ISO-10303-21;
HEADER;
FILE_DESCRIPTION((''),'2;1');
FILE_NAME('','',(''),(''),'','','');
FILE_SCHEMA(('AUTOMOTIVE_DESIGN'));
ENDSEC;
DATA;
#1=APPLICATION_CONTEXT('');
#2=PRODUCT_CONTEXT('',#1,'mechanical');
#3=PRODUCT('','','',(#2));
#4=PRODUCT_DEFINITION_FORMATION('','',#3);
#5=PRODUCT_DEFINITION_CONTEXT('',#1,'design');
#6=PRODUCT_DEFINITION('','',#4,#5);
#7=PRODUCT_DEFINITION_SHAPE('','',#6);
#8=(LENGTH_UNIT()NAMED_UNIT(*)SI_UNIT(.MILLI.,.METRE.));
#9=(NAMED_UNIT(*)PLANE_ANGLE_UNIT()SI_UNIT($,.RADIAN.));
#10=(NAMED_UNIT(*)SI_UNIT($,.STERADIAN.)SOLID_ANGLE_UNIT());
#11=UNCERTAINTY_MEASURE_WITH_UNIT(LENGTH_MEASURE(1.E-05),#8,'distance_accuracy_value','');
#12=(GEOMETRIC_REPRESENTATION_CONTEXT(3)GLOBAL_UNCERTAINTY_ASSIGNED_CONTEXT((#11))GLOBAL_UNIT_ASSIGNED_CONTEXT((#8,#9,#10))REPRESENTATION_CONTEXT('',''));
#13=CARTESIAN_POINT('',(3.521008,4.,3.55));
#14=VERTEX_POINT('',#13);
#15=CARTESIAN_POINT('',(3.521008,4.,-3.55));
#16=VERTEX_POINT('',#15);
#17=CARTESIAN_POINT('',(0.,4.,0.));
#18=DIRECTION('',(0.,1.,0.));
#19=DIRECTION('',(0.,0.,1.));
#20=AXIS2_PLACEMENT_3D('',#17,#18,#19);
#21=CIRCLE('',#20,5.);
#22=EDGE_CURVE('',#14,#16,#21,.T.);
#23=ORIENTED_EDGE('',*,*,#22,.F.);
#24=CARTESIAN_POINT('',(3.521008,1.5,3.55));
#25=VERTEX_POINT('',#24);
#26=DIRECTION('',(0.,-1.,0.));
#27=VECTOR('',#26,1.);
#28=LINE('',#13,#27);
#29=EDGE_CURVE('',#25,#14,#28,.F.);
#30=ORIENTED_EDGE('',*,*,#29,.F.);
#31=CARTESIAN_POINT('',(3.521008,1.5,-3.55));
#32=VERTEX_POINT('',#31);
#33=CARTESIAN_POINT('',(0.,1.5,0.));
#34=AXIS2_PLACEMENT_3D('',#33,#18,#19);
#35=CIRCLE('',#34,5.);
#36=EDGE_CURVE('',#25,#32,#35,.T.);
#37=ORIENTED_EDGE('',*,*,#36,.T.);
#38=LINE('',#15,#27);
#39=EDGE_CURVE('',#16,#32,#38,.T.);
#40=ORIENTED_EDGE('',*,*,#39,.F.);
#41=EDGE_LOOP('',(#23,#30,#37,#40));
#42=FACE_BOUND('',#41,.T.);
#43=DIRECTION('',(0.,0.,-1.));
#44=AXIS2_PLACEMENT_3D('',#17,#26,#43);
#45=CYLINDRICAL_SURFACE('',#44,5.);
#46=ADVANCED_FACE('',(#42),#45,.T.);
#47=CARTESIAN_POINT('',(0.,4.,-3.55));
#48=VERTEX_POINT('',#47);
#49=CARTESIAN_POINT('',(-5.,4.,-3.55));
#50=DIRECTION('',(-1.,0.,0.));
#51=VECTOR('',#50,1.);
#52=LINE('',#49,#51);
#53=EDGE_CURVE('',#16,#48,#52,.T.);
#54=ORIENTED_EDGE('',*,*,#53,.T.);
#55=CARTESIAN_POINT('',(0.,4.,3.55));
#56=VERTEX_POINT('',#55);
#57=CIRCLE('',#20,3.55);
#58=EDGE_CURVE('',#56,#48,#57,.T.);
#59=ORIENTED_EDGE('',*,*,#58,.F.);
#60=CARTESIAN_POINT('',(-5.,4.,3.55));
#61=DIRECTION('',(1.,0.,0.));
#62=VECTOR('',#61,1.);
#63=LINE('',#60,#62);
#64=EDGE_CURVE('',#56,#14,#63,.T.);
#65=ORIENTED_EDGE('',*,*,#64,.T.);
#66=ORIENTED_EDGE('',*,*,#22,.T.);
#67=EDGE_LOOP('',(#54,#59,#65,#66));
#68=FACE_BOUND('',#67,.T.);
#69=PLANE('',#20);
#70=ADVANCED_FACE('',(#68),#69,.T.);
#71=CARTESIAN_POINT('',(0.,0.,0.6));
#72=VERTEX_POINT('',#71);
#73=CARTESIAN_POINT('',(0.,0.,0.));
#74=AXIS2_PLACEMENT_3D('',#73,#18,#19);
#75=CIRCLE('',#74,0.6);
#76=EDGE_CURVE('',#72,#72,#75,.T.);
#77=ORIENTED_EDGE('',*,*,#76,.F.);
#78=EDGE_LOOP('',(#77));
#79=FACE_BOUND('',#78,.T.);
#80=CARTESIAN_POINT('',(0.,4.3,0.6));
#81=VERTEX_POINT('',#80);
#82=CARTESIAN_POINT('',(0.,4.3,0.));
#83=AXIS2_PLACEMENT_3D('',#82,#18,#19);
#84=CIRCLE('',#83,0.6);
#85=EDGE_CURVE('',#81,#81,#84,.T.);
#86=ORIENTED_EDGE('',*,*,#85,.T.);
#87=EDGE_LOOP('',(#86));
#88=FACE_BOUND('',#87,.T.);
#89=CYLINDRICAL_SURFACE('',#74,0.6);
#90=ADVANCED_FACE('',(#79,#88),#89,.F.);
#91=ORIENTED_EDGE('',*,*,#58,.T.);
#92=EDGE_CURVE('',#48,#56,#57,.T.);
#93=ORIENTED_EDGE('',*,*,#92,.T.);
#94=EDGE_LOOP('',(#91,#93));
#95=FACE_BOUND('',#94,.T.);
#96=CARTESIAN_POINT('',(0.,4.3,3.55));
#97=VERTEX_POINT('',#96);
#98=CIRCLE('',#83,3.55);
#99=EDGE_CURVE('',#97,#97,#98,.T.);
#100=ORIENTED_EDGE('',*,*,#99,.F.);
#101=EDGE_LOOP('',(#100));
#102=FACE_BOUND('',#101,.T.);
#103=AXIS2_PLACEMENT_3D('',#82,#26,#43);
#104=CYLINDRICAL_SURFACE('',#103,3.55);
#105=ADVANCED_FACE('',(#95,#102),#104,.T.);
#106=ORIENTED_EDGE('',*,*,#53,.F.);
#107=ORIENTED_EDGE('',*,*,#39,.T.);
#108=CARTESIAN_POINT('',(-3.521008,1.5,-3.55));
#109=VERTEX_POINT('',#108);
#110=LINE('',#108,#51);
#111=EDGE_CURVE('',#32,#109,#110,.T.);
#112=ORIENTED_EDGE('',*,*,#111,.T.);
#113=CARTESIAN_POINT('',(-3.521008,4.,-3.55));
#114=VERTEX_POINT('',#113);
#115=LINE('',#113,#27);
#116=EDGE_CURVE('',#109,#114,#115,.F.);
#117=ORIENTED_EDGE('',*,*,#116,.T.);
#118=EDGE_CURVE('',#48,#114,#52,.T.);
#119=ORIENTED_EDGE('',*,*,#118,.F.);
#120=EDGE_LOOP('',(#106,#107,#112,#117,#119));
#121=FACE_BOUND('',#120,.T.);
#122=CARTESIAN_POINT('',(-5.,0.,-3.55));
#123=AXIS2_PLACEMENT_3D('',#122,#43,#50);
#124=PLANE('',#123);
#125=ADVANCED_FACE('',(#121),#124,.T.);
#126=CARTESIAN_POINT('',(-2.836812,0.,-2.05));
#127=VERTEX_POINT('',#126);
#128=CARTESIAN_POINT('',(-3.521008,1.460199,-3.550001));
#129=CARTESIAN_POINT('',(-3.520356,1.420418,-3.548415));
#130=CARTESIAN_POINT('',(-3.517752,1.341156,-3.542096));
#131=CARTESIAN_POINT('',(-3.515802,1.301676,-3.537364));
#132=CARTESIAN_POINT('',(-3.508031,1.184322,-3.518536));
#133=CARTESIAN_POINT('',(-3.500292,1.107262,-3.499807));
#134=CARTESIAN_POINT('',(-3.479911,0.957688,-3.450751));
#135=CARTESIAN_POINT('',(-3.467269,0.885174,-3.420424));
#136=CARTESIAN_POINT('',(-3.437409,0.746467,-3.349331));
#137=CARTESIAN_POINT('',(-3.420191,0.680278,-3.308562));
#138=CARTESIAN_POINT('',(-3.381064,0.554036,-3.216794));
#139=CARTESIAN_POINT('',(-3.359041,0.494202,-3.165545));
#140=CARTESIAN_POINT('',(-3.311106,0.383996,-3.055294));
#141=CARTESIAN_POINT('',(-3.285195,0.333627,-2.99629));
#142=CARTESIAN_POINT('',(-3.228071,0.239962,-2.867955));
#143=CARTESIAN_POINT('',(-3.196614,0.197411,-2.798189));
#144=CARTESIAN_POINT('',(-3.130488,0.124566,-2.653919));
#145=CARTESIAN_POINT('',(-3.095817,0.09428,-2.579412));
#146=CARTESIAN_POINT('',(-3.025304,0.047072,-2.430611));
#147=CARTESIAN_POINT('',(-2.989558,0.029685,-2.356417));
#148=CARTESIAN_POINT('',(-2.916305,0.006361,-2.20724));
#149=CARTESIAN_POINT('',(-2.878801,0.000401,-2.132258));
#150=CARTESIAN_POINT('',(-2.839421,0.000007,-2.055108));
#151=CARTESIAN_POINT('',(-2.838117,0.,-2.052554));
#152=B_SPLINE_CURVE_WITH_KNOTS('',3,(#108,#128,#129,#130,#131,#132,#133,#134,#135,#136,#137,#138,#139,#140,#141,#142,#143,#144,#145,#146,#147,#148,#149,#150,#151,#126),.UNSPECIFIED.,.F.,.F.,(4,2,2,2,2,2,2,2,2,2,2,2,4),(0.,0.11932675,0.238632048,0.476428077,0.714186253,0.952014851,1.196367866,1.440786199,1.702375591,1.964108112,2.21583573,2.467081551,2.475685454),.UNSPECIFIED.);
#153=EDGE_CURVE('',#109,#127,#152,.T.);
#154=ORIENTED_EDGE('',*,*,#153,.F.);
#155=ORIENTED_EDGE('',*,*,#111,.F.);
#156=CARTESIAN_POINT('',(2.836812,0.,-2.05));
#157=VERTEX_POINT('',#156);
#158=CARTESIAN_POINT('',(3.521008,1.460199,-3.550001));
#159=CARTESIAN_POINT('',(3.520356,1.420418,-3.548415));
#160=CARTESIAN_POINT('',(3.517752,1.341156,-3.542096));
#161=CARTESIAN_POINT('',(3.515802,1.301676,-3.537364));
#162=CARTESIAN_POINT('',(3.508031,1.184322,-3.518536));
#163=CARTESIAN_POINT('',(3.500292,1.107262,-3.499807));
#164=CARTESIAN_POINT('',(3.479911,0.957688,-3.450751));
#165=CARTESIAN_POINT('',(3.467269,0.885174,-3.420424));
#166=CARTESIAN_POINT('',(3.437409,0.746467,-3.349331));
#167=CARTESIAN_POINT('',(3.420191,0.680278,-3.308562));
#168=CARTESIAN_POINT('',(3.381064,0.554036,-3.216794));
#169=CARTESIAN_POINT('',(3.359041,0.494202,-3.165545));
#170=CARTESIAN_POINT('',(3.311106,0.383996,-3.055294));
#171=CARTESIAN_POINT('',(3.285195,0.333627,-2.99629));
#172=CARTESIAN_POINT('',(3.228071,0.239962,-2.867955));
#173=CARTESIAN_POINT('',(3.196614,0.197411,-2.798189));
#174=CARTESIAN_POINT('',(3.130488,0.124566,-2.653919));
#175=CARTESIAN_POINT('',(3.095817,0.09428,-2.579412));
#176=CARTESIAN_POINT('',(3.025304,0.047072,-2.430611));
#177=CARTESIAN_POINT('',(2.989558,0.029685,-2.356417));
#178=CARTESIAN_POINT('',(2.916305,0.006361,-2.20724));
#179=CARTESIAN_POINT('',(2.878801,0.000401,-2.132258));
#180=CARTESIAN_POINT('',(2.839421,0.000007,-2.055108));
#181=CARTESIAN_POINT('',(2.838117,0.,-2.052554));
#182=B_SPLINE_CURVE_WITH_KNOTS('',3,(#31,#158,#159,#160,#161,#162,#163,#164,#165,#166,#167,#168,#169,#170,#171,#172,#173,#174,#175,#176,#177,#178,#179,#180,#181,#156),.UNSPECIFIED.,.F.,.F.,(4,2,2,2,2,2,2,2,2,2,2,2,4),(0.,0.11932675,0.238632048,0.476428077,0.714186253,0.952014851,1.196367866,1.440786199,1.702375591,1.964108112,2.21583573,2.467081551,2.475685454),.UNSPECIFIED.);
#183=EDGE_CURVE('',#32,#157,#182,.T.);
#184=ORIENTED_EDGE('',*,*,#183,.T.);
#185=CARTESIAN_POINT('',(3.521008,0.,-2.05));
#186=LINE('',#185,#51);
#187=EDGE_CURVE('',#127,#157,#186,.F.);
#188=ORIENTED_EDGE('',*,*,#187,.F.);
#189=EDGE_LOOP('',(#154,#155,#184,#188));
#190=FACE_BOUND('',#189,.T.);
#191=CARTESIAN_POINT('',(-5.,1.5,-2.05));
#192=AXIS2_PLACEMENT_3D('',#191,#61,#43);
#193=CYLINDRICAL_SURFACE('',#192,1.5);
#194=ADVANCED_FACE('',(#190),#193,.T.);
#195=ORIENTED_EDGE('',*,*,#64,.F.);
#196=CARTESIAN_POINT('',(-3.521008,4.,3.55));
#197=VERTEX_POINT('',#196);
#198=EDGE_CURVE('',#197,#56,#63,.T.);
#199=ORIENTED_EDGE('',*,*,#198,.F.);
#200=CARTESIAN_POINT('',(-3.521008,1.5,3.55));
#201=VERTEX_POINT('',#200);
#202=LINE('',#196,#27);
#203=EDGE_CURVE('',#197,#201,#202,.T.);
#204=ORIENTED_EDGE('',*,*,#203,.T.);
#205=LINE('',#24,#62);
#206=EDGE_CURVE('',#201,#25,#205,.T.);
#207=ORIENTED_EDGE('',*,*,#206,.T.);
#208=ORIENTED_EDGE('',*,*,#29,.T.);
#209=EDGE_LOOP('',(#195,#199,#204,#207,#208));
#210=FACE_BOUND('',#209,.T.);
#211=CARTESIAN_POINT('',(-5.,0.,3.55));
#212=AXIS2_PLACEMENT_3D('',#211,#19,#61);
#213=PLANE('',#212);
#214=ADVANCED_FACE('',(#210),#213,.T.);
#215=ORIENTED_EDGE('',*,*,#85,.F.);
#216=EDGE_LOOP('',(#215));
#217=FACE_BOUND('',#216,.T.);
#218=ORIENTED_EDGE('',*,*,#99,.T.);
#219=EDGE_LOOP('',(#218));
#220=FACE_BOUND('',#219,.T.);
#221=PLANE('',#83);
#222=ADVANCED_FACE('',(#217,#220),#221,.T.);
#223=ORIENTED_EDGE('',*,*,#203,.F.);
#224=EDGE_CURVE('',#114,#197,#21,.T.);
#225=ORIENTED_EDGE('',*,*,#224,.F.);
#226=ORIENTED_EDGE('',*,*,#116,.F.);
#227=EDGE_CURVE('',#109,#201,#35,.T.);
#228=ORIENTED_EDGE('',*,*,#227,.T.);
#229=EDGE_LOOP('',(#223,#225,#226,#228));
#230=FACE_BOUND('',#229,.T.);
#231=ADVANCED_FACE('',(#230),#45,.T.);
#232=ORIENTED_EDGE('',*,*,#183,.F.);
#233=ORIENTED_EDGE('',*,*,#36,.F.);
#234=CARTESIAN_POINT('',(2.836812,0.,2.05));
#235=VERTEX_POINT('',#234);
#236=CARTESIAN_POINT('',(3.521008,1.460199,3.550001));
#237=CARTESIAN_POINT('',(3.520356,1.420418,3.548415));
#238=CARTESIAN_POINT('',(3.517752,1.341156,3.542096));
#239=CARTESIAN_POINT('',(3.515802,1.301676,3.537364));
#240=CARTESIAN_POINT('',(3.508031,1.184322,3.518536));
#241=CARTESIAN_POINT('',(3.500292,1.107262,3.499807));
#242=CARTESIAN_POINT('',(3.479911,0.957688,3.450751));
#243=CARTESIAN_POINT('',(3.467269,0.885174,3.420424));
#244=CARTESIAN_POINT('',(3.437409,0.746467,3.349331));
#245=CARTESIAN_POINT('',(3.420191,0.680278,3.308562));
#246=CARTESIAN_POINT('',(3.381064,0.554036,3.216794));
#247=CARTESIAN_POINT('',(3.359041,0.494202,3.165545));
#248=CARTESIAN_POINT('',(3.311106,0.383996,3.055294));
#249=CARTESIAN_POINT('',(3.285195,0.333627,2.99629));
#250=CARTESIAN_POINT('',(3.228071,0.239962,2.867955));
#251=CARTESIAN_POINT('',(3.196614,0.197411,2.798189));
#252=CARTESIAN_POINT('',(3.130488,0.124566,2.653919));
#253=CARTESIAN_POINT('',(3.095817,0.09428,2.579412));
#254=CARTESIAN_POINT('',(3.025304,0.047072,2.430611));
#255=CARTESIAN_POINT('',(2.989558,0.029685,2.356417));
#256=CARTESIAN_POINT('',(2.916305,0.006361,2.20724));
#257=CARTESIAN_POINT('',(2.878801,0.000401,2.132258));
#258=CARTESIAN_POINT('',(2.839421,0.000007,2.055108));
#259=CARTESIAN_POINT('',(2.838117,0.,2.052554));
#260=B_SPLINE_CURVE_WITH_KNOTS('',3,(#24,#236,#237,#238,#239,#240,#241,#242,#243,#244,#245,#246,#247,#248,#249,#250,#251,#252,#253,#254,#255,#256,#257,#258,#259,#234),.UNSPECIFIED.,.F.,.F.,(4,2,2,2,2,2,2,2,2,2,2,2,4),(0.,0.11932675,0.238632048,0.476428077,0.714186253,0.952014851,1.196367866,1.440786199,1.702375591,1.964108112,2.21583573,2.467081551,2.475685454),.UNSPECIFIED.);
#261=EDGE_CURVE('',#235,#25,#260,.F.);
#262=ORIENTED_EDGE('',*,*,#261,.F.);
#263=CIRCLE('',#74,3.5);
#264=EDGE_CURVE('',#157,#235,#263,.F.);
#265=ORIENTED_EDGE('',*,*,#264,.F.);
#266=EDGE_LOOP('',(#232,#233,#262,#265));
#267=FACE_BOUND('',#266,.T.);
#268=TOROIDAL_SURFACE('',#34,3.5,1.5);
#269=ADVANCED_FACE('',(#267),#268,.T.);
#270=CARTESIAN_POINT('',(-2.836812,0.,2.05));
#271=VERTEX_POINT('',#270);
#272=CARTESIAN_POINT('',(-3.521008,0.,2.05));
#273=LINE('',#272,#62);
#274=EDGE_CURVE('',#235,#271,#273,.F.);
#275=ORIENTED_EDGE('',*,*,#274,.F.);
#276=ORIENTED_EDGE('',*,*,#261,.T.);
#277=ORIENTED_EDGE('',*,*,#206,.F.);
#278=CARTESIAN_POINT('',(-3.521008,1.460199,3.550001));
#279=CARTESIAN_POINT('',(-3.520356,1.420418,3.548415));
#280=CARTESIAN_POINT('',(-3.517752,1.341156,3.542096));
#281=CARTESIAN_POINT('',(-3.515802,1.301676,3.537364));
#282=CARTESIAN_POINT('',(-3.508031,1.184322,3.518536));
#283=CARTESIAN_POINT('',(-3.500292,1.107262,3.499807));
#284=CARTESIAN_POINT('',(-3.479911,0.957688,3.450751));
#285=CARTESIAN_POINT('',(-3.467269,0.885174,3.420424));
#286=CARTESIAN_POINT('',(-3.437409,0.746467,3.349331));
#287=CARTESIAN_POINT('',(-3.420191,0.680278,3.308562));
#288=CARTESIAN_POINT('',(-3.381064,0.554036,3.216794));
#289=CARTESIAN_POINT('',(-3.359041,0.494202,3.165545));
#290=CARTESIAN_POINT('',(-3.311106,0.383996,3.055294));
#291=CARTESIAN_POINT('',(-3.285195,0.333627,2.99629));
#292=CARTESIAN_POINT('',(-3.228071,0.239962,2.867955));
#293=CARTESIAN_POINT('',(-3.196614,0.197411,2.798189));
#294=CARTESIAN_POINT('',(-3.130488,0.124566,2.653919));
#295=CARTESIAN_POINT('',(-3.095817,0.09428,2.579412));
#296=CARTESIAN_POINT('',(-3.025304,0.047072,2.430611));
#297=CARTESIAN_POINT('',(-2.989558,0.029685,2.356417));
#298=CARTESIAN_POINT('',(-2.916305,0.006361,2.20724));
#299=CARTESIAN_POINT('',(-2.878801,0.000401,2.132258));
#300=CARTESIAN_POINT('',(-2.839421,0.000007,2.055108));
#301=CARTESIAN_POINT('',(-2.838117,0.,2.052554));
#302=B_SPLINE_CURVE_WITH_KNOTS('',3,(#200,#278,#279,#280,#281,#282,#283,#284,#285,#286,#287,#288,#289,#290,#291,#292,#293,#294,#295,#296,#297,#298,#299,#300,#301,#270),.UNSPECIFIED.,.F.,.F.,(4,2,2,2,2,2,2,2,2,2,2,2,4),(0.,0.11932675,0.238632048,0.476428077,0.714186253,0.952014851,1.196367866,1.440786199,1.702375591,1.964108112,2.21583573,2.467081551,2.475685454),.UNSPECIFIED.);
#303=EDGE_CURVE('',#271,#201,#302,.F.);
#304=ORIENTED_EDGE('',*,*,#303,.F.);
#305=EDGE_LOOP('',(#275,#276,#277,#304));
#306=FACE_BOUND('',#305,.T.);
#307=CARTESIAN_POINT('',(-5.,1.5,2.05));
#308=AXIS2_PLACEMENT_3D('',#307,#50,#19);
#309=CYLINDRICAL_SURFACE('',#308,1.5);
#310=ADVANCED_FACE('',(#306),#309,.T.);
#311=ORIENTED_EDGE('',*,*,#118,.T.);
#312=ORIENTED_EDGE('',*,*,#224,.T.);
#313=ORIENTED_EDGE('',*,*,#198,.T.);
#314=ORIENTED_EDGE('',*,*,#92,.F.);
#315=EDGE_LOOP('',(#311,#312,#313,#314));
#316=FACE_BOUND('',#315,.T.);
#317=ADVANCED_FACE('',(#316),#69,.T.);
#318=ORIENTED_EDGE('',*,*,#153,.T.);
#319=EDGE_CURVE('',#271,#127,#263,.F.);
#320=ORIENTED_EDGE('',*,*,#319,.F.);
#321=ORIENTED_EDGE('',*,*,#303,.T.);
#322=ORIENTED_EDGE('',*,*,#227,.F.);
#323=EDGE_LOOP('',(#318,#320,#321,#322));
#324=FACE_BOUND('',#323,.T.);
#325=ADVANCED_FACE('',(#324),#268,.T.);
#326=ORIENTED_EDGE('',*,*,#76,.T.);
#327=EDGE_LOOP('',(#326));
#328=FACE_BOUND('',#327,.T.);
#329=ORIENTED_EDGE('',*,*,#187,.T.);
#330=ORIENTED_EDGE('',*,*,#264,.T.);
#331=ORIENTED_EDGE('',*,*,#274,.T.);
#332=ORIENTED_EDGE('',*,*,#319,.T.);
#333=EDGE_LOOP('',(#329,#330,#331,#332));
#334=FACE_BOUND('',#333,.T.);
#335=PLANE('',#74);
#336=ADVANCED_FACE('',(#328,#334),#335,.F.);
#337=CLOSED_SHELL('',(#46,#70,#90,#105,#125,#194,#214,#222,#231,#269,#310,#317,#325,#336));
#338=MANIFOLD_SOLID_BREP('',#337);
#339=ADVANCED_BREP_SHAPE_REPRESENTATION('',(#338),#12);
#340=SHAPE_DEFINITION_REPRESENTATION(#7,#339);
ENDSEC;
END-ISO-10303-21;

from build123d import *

# Parameters (mm, degrees)
SKETCH_1_R           = 5
EXTRUDE_1_DEPTH      = 4
SKETCH_2_R           = 3.55
EXTRUDE_2_DEPTH      = 0.3
SKETCH_3_R           = 0.6
CUT_EXTRUDE_1_DEPTH  = 9.275868534
SKETCH_4_OUTSIDE_W   = 14.956
SKETCH_4_OUTSIDE_H   = 14.956
SKETCH_4_OUTSIDE_W_2 = 10
SKETCH_4_OUTSIDE_H_2 = 7.1
CUT_EXTRUDE_2_DEPTH  = 9.124038405
FILLET_1_R           = 1.5


with BuildPart() as part:
    # 草图1 → 凸台-拉伸1 (new body)
    with BuildSketch(Plane(origin=(0, 0, 0), x_dir=(1, 0, 0), z_dir=(0, 1, 0))):
        with Locations(Location((0, 0, 0), (0, 0, 270))):
            Circle(SKETCH_1_R)
    extrude(amount=EXTRUDE_1_DEPTH)

    # 草图2 → 凸台-拉伸2 (add)
    with BuildSketch(Plane(origin=(0, 4, 0), x_dir=(1, 0, 0), z_dir=(0, 1, 0))):
        with Locations(Location((0, 0, 0), (0, 0, 270))):
            Circle(SKETCH_2_R)
    extrude(amount=EXTRUDE_2_DEPTH)

    # 草图3 → 切除-拉伸1 (cut, through all)
    with BuildSketch(Plane(origin=(0, 4.3, 0), x_dir=(1, 0, 0), z_dir=(0, 1, 0))):
        with Locations(Location((0, 0, 0), (0, 0, 270))):
            Circle(SKETCH_3_R)
    extrude(amount=-CUT_EXTRUDE_1_DEPTH, mode=Mode.SUBTRACT)

    # 草图4 outside → 切除-拉伸2 (cut, through all)
    with BuildSketch(Plane(origin=(0, 4, 0), x_dir=(1, 0, 0), z_dir=(0, 1, 0))):
        Rectangle(SKETCH_4_OUTSIDE_W, SKETCH_4_OUTSIDE_H)
        Rectangle(SKETCH_4_OUTSIDE_W_2, SKETCH_4_OUTSIDE_H_2, mode=Mode.SUBTRACT)
    extrude(amount=-CUT_EXTRUDE_2_DEPTH, mode=Mode.SUBTRACT)

    # 圆角1
    # the kernel refuses this fillet: 1.5 mm, written as the material it takes off along each edge
    with BuildSketch(Plane(origin=(0, 0, 0), x_dir=(-0.03098871975283517, 0, 0.9995197342964671), z_dir=(0.9995197342964671, 0, 0.03098871975283517))) as fillet_1_piece_1:
        with BuildLine():
            CenterArc((5 - FILLET_1_R, -FILLET_1_R), FILLET_1_R, 0, 90)
            Line((5 - FILLET_1_R, 0), (5, 0))
            Line((5, 0), (5, -FILLET_1_R))
        make_face()
    revolve(axis=Axis((0, 0, 0), (0, -1, 0)), revolution_arc=176.4483857, mode=Mode.SUBTRACT)
    with BuildSketch(Plane(origin=(-7.271008378, 0, -3.55), x_dir=(0, 1, 0), z_dir=(1, 0, 0)), Plane(origin=(7.271008378, 0, 3.55), x_dir=(0, 1, 0), z_dir=(-1, 0, 0))) as fillet_1_piece_2:
        with BuildLine():
            CenterArc((FILLET_1_R, FILLET_1_R), FILLET_1_R, 180, 90)
            Line((0, FILLET_1_R), (0, 0))
            Line((0, 0), (FILLET_1_R, 0))
        make_face()
    extrude(amount=14.542016757, mode=Mode.SUBTRACT)
    with BuildSketch(Plane(origin=(0, 0, 0), x_dir=(0.030988719752834452, 0, 0.9995197342964671), z_dir=(-0.9995197342964671, 0, 0.030988719752834452))) as fillet_1_piece_3:
        with BuildLine():
            CenterArc((5 - FILLET_1_R, FILLET_1_R), FILLET_1_R, 270, 90)
            Line((5 - FILLET_1_R, 0), (5, 0))
            Line((5, 0), (5, FILLET_1_R))
        make_face()
    revolve(axis=Axis((0, 0, 0), (0, 1, 0)), revolution_arc=176.4483857, mode=Mode.SUBTRACT)


solid = part.part
